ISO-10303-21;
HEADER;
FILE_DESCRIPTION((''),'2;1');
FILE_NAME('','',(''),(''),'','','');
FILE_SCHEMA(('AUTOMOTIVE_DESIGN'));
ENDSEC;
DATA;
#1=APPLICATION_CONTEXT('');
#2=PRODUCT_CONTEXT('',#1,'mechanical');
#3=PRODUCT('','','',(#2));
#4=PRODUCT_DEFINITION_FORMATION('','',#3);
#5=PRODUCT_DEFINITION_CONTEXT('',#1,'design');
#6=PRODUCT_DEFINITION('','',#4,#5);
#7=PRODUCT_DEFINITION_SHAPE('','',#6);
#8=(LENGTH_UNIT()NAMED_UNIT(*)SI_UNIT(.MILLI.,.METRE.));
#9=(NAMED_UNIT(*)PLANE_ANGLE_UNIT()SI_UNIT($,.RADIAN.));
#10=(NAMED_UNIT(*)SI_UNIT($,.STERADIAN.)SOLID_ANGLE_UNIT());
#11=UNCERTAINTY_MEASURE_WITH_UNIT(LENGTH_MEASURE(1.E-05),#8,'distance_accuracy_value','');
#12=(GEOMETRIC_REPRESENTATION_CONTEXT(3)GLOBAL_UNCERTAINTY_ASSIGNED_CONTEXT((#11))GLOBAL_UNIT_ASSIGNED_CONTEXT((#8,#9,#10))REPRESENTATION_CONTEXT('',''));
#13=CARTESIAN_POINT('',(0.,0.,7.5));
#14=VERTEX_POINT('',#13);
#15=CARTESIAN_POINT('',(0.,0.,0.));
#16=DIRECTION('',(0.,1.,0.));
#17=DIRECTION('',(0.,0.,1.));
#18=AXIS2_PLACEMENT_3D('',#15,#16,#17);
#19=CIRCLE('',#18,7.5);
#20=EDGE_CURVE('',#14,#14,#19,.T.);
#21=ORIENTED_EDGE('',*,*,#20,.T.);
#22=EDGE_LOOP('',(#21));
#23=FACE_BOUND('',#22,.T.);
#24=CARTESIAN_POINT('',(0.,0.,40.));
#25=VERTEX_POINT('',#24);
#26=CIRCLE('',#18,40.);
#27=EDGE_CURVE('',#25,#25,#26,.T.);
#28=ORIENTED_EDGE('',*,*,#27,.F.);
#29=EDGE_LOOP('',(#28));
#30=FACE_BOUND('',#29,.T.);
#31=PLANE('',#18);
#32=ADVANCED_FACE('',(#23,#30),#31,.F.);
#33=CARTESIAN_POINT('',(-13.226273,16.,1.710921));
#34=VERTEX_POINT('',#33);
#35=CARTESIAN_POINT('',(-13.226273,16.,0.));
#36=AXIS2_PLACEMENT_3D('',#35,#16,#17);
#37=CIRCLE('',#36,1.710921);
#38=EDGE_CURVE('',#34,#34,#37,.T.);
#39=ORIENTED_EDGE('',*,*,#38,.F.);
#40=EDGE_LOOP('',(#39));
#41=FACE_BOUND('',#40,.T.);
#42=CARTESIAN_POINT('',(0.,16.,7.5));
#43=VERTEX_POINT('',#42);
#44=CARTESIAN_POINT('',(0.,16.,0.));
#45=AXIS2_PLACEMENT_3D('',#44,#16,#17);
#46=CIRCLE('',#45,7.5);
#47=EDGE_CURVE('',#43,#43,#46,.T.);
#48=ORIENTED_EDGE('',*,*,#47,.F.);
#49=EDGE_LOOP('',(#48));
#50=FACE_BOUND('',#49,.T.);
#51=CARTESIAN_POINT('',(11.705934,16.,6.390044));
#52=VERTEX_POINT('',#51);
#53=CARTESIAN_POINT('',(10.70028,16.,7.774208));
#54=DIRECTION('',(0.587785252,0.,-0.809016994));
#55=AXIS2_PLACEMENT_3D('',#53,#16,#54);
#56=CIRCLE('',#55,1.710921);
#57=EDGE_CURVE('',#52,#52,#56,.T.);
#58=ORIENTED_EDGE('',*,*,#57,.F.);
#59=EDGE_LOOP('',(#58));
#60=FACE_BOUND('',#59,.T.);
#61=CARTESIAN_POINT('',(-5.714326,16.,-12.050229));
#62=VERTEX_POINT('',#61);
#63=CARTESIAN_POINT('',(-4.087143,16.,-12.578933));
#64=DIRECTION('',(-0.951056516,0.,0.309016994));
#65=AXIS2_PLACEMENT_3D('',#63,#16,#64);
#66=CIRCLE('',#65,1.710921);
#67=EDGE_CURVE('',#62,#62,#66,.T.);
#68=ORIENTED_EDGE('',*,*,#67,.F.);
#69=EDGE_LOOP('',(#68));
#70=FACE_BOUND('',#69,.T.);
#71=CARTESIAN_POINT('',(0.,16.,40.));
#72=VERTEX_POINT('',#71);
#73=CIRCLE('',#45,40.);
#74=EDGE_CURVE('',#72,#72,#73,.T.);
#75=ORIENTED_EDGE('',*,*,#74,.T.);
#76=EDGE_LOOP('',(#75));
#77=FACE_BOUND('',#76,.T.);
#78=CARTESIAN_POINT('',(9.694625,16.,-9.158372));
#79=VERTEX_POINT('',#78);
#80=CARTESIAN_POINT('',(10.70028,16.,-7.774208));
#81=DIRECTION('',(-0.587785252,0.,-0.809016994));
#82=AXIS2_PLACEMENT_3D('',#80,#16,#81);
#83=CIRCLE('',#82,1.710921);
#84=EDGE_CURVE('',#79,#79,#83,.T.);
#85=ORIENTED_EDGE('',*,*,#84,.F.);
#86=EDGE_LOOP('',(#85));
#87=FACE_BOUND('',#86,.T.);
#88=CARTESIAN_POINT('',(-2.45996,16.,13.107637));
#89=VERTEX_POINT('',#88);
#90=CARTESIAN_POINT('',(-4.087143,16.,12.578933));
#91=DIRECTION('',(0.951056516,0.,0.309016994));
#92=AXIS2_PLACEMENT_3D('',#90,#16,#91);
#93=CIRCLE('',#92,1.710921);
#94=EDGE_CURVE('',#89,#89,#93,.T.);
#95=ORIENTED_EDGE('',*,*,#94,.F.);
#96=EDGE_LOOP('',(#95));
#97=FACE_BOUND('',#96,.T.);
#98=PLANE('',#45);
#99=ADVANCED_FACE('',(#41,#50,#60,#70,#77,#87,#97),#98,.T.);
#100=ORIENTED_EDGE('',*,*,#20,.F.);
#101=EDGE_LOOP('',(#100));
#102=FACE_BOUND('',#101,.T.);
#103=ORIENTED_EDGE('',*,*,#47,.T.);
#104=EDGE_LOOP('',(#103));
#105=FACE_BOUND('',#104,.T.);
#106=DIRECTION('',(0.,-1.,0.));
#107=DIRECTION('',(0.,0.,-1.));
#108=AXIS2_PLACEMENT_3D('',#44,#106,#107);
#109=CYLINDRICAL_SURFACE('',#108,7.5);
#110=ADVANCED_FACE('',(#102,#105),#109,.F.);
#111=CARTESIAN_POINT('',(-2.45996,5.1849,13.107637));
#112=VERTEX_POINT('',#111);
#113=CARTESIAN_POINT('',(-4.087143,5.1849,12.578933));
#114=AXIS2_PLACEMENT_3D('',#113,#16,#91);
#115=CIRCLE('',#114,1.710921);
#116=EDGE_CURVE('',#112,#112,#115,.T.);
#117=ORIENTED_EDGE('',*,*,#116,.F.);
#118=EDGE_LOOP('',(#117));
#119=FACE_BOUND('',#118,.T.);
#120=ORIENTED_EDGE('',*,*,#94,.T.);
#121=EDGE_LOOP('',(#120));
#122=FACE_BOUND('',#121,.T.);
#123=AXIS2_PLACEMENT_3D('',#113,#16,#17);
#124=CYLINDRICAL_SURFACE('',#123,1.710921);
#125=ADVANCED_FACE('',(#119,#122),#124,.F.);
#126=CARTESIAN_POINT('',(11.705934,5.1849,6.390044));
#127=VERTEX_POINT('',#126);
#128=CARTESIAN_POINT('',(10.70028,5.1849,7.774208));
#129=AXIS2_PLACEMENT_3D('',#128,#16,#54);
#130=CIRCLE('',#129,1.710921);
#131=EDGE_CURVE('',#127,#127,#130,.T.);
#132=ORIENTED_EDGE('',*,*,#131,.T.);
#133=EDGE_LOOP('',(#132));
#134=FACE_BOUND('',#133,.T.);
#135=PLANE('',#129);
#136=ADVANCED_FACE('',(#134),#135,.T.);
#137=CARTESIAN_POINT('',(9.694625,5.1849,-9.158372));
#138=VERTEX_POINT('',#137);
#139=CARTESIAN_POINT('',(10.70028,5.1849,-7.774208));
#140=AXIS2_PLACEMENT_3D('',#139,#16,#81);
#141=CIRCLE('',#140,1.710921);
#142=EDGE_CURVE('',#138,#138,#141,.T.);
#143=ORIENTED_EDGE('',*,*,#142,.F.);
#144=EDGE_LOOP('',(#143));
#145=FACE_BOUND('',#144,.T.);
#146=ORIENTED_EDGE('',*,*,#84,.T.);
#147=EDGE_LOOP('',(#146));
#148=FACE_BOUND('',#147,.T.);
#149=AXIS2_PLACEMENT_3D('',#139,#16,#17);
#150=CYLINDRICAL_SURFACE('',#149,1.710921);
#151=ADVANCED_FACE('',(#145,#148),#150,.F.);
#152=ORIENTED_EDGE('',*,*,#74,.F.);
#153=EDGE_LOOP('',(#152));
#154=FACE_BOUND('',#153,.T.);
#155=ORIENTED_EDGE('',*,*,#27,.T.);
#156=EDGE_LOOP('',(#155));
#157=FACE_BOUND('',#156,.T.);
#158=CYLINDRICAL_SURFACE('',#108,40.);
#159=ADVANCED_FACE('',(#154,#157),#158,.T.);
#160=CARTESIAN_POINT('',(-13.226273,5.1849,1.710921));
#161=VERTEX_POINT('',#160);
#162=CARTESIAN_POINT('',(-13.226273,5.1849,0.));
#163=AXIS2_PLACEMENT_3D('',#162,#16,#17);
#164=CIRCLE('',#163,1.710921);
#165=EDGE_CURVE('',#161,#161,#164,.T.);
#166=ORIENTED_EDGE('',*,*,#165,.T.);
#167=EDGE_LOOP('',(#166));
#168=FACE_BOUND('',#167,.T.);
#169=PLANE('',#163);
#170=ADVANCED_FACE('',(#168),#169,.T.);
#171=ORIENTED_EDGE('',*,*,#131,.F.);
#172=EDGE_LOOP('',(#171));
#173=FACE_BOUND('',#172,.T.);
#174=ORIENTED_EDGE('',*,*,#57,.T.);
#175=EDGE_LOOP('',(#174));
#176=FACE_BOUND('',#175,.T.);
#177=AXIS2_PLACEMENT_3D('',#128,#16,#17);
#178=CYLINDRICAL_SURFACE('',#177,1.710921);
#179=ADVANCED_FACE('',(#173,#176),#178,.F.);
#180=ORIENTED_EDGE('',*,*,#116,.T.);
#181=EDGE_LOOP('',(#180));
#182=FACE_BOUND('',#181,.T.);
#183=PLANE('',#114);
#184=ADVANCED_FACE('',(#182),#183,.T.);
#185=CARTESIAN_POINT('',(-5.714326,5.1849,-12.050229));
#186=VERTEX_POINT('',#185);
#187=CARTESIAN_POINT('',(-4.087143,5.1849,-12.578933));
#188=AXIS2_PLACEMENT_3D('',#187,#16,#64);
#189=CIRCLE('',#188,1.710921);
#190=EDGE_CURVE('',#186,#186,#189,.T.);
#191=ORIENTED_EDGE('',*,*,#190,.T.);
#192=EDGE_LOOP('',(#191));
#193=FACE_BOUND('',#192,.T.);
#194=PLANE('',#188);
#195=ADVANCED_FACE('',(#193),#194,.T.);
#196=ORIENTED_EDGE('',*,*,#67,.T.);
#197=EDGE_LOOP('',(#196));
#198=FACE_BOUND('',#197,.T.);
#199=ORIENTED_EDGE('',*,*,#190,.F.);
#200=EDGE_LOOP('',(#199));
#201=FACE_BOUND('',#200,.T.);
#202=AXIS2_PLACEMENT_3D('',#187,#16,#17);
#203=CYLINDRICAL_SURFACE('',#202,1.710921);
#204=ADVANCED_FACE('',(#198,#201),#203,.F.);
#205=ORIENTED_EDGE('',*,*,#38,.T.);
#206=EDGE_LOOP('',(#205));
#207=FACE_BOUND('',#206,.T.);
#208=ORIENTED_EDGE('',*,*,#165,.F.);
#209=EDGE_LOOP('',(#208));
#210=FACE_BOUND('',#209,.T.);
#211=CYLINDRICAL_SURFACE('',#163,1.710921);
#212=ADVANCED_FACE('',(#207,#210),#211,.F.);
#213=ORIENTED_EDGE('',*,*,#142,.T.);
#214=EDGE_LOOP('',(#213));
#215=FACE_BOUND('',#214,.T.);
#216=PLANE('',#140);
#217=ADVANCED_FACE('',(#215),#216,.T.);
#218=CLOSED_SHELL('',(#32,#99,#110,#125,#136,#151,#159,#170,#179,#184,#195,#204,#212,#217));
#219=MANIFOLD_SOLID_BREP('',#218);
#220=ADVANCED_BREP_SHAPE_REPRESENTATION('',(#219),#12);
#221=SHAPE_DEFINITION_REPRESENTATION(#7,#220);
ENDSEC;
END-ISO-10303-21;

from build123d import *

# Parameters (mm, degrees)
SKETCH1_R           = 40
BOSS_EXTRUDE1_DEPTH = 16
SKETCH2_R           = 7.5
CUT_EXTRUDE1_DEPTH  = 59.787753827
SKETCH3_R           = 1.710921045
CUT_EXTRUDE2_DEPTH  = 10.815100178
CIRPATTERN1_COUNT   = 5


with BuildPart() as part:
    # Sketch1 → Boss-Extrude1 (new body)
    with BuildSketch(Plane(origin=(0, 0, 0), x_dir=(1, 0, 0), z_dir=(0, 1, 0))):
        Circle(SKETCH1_R)
    extrude(amount=BOSS_EXTRUDE1_DEPTH)

    # Sketch2 → Cut-Extrude1 (cut, through all)
    with BuildSketch(Plane(origin=(0, 0, 0), x_dir=(1, 0, 0), z_dir=(0, 1, 0))):
        Circle(SKETCH2_R)
    extrude(amount=CUT_EXTRUDE1_DEPTH, mode=Mode.SUBTRACT)

    # Sketch3 → Cut-Extrude2 (cut)
    with BuildSketch(Plane(origin=(0, 16, 0), x_dir=(1, 0, 0), z_dir=(0, 1, 0))):
        with Locations((-13.22627292, 0)):
            Circle(SKETCH3_R)
    cut_extrude2 = extrude(amount=-CUT_EXTRUDE2_DEPTH, mode=Mode.SUBTRACT)

    # CirPattern1: Cut-Extrude2 ×5 about axis
    cirpattern1_axis = Axis((0, 0, 0), (0, 1, 0))
    for i in range(1, CIRPATTERN1_COUNT):
        add(cut_extrude2.rotate(cirpattern1_axis, i * 360 / CIRPATTERN1_COUNT), mode=Mode.SUBTRACT)


solid = part.part
